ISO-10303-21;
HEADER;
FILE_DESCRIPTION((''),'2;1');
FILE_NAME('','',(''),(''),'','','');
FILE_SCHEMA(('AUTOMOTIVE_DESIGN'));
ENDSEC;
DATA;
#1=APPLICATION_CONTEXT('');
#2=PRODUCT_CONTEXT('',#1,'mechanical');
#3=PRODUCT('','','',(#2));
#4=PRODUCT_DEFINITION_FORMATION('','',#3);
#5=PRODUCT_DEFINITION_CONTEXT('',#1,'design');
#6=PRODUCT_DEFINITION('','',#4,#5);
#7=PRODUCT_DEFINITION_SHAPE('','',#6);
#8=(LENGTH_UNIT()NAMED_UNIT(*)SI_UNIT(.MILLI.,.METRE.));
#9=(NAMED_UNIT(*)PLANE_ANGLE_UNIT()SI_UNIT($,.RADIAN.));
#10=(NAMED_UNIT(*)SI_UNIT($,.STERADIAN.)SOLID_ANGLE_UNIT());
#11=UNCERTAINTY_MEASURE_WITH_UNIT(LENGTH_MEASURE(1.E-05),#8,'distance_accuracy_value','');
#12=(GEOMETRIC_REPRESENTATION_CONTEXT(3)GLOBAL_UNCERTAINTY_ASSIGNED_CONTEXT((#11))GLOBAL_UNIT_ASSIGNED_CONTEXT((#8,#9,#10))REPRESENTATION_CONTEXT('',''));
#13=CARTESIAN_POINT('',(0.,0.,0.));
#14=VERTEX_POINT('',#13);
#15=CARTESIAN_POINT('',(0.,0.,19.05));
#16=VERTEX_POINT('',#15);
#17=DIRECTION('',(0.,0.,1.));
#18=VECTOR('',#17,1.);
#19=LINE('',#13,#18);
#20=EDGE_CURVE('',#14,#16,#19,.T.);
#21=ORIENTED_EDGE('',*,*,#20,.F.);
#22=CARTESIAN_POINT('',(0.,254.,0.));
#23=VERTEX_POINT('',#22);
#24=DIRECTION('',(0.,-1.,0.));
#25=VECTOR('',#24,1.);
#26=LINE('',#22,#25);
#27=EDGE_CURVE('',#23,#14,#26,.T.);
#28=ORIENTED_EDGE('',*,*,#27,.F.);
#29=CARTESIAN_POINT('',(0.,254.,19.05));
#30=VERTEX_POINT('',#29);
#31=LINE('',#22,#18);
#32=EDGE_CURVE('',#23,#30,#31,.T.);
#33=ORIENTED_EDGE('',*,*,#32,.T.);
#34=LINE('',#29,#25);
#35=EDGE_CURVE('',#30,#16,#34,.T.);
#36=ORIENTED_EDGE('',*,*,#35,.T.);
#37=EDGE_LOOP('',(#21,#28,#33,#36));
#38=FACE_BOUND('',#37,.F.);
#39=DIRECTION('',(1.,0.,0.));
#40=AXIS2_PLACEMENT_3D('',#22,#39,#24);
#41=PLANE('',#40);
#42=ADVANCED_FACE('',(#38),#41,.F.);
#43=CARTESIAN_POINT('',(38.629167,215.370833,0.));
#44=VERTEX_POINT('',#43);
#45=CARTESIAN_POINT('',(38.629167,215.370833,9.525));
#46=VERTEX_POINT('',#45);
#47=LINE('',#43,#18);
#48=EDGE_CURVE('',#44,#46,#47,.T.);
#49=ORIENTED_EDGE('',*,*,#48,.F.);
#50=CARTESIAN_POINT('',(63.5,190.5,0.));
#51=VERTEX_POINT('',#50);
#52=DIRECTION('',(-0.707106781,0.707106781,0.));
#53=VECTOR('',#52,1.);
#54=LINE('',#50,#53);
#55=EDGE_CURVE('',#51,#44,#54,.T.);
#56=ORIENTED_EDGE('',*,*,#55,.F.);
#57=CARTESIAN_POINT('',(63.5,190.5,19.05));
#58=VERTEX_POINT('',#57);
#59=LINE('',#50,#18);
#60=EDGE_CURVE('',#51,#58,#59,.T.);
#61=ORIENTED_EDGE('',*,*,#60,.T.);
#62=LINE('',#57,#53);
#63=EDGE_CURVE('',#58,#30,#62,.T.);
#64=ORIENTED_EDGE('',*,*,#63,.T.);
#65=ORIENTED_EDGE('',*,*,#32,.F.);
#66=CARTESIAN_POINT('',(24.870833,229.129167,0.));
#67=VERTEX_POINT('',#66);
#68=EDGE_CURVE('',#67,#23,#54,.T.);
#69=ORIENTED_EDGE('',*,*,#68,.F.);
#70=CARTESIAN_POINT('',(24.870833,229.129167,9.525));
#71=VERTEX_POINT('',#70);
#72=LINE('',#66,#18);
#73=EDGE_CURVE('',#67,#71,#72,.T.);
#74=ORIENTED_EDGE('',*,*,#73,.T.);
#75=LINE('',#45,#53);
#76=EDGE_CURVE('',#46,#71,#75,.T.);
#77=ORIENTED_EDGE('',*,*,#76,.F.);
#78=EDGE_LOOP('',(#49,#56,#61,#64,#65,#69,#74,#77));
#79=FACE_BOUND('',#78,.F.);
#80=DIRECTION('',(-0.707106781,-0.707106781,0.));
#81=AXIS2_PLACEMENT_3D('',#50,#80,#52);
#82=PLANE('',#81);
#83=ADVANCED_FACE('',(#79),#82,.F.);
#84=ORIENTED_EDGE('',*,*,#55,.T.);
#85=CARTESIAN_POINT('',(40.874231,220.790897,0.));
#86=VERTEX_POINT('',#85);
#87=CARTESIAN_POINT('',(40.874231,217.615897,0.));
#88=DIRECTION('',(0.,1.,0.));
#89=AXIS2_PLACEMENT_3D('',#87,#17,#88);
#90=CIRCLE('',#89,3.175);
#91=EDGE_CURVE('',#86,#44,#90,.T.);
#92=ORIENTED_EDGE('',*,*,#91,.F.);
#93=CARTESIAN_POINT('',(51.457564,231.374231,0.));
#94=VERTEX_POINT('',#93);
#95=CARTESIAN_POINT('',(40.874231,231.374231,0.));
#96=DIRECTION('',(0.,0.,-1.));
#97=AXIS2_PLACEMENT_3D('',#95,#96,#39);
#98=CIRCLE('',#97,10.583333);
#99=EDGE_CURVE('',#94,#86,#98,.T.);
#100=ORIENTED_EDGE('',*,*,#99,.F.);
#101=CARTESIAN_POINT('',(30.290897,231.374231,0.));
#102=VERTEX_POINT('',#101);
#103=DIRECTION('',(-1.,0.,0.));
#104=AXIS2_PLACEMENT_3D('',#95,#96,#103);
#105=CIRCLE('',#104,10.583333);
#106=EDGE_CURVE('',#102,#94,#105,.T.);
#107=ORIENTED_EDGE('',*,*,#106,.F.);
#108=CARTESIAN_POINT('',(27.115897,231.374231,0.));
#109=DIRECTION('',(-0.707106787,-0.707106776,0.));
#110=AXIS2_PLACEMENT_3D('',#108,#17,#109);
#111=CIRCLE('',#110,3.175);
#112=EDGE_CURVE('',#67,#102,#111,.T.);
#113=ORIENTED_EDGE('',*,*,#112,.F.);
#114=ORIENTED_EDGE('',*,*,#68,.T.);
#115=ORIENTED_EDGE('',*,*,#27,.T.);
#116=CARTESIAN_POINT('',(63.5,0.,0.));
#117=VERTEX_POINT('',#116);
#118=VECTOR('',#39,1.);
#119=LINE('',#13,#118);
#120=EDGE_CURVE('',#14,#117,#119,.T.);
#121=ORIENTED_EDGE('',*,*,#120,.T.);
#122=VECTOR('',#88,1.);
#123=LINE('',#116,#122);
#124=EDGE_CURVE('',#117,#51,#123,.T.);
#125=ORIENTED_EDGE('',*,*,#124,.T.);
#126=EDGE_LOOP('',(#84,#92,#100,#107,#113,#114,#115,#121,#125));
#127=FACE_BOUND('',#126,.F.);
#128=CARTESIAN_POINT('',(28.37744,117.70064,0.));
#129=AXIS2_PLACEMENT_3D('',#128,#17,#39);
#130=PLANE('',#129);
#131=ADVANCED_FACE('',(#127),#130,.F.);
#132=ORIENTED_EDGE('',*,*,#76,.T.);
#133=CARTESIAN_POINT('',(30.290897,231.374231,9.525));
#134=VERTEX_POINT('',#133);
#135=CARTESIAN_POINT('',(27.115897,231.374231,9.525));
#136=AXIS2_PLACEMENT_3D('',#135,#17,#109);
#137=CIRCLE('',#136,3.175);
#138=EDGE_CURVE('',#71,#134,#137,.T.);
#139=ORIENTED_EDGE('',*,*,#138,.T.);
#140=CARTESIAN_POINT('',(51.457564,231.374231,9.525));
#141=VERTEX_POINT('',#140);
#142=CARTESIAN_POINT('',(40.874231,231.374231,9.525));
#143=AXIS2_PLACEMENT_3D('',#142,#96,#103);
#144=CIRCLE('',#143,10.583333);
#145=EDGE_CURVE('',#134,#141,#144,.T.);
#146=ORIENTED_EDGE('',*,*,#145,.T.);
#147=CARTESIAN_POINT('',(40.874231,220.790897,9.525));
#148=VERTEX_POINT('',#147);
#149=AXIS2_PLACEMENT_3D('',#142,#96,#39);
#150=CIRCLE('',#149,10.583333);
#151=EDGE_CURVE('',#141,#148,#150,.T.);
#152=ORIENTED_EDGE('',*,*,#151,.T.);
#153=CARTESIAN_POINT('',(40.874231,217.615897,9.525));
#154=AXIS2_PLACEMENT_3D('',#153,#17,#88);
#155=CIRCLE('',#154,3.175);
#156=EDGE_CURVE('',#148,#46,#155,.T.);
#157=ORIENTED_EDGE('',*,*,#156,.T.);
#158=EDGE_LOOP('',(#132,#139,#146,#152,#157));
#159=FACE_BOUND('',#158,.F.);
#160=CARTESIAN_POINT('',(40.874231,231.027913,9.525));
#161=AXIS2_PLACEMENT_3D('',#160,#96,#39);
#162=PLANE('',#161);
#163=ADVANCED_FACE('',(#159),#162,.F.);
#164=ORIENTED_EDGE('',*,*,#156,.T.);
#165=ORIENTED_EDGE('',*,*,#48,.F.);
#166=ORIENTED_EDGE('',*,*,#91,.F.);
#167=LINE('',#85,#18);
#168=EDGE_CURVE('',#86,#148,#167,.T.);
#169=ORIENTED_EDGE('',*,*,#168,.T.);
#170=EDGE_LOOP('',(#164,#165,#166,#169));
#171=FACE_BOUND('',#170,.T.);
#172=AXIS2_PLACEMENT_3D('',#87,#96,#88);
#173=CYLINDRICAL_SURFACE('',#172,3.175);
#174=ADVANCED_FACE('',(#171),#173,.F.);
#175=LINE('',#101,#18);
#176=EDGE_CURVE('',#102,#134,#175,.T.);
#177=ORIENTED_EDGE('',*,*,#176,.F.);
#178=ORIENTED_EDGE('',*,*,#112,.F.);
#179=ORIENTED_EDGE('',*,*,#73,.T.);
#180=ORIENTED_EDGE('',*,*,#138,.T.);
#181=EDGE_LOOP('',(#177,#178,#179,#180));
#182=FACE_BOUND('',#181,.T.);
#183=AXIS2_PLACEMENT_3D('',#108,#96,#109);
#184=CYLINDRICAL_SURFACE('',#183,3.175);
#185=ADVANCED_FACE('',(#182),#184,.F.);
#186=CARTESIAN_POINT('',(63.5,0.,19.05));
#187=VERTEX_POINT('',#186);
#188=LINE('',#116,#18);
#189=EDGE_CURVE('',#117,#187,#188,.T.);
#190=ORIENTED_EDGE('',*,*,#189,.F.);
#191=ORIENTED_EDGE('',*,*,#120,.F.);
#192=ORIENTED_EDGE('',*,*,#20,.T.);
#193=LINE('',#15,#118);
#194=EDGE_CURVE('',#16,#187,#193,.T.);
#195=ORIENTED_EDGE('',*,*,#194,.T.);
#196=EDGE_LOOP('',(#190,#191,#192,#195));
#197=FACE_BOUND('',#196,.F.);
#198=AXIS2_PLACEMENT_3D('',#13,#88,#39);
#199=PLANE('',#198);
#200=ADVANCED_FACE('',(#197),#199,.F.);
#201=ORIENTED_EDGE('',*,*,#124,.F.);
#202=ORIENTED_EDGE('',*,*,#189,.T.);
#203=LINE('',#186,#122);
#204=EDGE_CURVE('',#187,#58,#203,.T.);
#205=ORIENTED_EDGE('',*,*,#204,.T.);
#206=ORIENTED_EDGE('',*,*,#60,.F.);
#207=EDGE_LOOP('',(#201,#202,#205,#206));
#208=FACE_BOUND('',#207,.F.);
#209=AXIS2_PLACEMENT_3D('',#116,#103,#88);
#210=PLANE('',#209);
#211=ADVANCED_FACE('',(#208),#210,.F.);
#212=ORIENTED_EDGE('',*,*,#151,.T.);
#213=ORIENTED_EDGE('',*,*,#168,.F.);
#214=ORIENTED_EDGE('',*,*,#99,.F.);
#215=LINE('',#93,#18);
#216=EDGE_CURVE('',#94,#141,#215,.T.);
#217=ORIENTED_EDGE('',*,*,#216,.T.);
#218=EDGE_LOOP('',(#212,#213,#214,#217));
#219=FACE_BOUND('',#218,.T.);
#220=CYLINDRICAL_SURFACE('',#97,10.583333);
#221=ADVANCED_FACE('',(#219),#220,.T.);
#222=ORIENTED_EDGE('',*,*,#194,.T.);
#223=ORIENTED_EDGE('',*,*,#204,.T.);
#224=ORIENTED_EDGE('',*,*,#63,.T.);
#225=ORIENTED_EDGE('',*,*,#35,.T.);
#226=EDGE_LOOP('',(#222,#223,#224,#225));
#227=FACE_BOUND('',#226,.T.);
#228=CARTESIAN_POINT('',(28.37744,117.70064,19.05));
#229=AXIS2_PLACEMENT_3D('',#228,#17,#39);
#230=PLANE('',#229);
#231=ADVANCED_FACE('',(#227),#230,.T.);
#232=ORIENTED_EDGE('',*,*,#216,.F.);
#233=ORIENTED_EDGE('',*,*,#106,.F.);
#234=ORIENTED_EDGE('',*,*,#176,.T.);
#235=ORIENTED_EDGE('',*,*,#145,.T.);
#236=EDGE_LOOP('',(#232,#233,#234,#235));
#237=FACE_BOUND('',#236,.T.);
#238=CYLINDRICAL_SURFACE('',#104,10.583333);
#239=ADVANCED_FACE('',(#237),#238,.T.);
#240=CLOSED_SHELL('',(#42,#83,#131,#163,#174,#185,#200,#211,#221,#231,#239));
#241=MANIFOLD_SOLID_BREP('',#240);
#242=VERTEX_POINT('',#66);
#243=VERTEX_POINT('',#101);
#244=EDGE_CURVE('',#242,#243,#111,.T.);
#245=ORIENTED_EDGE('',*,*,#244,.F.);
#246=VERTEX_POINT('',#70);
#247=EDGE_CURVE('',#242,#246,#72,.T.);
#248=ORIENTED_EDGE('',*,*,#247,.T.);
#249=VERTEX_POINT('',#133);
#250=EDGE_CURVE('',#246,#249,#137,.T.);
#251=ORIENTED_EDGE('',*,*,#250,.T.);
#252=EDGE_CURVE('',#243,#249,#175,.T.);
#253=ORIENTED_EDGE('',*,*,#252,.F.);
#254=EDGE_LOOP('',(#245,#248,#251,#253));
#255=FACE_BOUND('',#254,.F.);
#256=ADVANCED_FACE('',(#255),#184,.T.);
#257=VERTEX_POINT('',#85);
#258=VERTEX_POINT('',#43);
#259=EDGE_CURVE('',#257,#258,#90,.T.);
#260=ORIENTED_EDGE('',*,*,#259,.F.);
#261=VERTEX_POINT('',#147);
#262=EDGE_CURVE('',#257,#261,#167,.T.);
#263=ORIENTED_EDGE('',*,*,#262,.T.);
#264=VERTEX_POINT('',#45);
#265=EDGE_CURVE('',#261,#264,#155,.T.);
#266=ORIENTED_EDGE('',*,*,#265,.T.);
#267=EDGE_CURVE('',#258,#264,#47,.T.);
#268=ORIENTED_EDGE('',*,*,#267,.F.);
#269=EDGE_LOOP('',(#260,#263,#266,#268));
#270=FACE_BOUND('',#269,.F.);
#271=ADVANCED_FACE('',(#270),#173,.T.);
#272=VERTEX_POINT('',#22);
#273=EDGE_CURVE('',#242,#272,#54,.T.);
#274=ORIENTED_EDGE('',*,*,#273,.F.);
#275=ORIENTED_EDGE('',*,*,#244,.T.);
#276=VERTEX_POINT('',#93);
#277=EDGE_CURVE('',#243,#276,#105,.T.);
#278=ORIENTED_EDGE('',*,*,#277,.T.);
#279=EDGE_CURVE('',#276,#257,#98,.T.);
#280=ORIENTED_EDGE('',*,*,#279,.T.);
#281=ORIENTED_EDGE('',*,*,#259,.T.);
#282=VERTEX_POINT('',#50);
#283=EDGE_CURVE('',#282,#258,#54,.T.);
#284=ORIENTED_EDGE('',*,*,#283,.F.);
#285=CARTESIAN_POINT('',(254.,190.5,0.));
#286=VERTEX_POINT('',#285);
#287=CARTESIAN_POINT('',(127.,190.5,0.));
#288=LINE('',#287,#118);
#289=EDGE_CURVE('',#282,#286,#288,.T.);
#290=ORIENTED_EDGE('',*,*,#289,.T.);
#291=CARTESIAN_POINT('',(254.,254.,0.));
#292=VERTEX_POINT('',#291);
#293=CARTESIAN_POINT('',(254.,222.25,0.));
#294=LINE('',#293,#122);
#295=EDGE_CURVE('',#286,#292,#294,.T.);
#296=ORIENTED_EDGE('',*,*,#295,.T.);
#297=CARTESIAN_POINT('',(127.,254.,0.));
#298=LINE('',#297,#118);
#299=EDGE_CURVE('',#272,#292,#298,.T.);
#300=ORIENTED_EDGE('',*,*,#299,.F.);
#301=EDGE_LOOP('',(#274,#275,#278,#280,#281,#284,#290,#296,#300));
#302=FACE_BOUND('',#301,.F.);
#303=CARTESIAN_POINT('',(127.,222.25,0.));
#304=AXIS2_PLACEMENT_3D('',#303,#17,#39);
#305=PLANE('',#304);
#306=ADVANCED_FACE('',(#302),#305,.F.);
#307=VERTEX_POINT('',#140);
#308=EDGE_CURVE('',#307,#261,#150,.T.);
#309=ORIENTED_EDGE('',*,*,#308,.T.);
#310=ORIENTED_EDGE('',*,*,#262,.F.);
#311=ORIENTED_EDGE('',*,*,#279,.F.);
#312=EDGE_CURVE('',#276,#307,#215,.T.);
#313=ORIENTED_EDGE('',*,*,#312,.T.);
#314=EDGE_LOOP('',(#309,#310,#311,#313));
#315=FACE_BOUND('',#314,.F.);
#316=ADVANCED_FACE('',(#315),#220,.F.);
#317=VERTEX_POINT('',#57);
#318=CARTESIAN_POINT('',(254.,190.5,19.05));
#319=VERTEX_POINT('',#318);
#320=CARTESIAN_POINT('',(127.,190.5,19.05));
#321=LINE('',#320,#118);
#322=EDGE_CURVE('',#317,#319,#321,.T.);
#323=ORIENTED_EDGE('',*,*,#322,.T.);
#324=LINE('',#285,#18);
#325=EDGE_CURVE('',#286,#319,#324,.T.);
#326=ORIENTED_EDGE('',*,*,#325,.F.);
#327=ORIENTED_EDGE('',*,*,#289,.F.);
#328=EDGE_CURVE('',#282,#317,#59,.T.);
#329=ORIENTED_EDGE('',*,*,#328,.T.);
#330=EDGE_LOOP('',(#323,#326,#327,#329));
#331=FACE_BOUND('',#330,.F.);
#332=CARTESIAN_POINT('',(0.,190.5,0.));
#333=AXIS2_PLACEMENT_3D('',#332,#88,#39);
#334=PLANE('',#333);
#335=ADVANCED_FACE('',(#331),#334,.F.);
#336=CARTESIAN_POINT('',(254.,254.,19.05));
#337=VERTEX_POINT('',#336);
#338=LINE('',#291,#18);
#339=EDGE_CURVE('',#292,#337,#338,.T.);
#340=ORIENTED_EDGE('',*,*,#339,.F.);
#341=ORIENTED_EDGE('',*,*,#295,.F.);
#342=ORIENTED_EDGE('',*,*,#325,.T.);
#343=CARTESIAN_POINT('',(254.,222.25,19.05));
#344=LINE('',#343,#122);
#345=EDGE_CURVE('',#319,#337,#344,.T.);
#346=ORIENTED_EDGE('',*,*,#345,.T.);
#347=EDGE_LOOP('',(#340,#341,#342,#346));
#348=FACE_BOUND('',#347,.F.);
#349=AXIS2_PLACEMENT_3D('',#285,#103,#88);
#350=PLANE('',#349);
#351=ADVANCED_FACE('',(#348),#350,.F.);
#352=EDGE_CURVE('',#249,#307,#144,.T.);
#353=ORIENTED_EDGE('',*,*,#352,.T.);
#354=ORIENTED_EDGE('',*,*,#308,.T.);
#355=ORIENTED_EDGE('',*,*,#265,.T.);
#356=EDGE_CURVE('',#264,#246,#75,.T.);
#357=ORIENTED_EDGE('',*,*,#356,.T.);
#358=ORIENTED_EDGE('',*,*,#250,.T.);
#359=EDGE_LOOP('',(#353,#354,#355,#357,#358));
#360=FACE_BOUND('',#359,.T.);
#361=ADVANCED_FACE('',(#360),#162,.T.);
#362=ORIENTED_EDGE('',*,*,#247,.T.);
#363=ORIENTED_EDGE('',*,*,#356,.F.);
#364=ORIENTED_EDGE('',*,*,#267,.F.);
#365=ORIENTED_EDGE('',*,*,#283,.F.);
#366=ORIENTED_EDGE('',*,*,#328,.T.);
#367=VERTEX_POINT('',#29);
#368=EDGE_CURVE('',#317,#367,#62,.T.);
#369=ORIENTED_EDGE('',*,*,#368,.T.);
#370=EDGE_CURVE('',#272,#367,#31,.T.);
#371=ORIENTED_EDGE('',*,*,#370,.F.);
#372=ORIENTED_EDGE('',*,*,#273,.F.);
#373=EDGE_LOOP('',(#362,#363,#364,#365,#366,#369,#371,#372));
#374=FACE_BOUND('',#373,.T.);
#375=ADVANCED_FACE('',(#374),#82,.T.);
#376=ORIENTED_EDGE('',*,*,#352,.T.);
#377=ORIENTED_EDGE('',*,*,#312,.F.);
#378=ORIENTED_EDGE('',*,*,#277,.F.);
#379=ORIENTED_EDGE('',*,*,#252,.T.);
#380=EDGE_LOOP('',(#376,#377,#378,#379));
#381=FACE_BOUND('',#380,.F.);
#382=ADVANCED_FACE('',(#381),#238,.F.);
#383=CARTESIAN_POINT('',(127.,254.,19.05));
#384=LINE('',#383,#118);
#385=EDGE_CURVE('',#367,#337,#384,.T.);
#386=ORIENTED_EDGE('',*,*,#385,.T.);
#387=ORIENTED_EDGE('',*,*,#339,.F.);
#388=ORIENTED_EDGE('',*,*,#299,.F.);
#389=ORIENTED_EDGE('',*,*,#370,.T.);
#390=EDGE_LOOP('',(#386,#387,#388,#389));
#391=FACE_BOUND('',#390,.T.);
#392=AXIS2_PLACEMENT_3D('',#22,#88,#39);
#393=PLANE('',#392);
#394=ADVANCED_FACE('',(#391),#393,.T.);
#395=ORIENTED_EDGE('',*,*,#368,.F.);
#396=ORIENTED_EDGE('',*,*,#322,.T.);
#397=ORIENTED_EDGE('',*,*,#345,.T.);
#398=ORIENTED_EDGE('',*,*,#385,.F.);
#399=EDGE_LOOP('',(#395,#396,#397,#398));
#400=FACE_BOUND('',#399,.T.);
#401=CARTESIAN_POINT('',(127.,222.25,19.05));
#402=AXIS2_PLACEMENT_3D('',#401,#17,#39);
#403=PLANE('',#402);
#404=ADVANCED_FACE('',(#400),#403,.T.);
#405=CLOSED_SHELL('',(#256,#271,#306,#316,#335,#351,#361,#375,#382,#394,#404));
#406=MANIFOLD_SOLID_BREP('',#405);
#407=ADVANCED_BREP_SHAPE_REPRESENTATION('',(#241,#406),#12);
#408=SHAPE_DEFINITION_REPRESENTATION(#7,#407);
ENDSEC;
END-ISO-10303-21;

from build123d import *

# Parameters (mm, degrees)
F2_DEPTH = 19.05
F4_DEPTH = 9.525
F5_W     = 254
F5_H     = 63.5
F6_DEPTH = 19.05


# Not quite as in the source:
# - a variable given as a bare number and used for a length is read in inches; the dataset says mm whatever the document's units were


with BuildPart() as f2:
    # F1 (on Top) → F2 (new body)
    with BuildSketch(Plane.XY):
        Polygon((0, 254), (0, 0), (63.5, 0), (63.5, 190.5), align=None)
    extrude(amount=F2_DEPTH)

    # F3 (on face) → F4 (join)
    with BuildSketch(Plane(origin=(0, 0, 0), x_dir=(1, 0, 0), z_dir=(0, 0, -1))):
        with BuildLine():
            ThreePointArc((40.8742306969, -220.7908973636), (33.3906839294, -223.8906839294), (30.2908973636, -231.3742306969))
            ThreePointArc((30.2908973636, -231.3742306969), (40.8742306969, -241.9575640303), (51.4575640303, -231.3742306969))
            ThreePointArc((51.4575640303, -231.3742306969), (48.3577774645, -223.8906839294), (40.8742306969, -220.7908973636))
        make_face()
        with BuildLine():
            ThreePointArc((24.8708333161, -229.1291666839), (28.3309172501, -228.4409131765), (30.2908973636, -231.3742306969))
            ThreePointArc((30.2908973636, -231.3742306969), (33.3906839294, -223.8906839294), (40.8742306969, -220.7908973636))
            ThreePointArc((40.8742306969, -220.7908973636), (37.9409131848, -218.83091727), (38.6291666535, -215.3708333465))
            Line((38.6291666535, -215.3708333465), (24.8708333161, -229.1291666839))
        make_face()
    extrude(amount=-F4_DEPTH)


with BuildPart() as f6:
    # F5 (on Top) → F6 (new body)
    with BuildSketch(Plane.XY):
        with Locations((127, 222.25)):
            Rectangle(F5_W, F5_H)
    extrude(amount=F6_DEPTH)

    # F7: cut F2
    add(f2.part, mode=Mode.SUBTRACT)


solid = Compound([f2.part, f6.part])
